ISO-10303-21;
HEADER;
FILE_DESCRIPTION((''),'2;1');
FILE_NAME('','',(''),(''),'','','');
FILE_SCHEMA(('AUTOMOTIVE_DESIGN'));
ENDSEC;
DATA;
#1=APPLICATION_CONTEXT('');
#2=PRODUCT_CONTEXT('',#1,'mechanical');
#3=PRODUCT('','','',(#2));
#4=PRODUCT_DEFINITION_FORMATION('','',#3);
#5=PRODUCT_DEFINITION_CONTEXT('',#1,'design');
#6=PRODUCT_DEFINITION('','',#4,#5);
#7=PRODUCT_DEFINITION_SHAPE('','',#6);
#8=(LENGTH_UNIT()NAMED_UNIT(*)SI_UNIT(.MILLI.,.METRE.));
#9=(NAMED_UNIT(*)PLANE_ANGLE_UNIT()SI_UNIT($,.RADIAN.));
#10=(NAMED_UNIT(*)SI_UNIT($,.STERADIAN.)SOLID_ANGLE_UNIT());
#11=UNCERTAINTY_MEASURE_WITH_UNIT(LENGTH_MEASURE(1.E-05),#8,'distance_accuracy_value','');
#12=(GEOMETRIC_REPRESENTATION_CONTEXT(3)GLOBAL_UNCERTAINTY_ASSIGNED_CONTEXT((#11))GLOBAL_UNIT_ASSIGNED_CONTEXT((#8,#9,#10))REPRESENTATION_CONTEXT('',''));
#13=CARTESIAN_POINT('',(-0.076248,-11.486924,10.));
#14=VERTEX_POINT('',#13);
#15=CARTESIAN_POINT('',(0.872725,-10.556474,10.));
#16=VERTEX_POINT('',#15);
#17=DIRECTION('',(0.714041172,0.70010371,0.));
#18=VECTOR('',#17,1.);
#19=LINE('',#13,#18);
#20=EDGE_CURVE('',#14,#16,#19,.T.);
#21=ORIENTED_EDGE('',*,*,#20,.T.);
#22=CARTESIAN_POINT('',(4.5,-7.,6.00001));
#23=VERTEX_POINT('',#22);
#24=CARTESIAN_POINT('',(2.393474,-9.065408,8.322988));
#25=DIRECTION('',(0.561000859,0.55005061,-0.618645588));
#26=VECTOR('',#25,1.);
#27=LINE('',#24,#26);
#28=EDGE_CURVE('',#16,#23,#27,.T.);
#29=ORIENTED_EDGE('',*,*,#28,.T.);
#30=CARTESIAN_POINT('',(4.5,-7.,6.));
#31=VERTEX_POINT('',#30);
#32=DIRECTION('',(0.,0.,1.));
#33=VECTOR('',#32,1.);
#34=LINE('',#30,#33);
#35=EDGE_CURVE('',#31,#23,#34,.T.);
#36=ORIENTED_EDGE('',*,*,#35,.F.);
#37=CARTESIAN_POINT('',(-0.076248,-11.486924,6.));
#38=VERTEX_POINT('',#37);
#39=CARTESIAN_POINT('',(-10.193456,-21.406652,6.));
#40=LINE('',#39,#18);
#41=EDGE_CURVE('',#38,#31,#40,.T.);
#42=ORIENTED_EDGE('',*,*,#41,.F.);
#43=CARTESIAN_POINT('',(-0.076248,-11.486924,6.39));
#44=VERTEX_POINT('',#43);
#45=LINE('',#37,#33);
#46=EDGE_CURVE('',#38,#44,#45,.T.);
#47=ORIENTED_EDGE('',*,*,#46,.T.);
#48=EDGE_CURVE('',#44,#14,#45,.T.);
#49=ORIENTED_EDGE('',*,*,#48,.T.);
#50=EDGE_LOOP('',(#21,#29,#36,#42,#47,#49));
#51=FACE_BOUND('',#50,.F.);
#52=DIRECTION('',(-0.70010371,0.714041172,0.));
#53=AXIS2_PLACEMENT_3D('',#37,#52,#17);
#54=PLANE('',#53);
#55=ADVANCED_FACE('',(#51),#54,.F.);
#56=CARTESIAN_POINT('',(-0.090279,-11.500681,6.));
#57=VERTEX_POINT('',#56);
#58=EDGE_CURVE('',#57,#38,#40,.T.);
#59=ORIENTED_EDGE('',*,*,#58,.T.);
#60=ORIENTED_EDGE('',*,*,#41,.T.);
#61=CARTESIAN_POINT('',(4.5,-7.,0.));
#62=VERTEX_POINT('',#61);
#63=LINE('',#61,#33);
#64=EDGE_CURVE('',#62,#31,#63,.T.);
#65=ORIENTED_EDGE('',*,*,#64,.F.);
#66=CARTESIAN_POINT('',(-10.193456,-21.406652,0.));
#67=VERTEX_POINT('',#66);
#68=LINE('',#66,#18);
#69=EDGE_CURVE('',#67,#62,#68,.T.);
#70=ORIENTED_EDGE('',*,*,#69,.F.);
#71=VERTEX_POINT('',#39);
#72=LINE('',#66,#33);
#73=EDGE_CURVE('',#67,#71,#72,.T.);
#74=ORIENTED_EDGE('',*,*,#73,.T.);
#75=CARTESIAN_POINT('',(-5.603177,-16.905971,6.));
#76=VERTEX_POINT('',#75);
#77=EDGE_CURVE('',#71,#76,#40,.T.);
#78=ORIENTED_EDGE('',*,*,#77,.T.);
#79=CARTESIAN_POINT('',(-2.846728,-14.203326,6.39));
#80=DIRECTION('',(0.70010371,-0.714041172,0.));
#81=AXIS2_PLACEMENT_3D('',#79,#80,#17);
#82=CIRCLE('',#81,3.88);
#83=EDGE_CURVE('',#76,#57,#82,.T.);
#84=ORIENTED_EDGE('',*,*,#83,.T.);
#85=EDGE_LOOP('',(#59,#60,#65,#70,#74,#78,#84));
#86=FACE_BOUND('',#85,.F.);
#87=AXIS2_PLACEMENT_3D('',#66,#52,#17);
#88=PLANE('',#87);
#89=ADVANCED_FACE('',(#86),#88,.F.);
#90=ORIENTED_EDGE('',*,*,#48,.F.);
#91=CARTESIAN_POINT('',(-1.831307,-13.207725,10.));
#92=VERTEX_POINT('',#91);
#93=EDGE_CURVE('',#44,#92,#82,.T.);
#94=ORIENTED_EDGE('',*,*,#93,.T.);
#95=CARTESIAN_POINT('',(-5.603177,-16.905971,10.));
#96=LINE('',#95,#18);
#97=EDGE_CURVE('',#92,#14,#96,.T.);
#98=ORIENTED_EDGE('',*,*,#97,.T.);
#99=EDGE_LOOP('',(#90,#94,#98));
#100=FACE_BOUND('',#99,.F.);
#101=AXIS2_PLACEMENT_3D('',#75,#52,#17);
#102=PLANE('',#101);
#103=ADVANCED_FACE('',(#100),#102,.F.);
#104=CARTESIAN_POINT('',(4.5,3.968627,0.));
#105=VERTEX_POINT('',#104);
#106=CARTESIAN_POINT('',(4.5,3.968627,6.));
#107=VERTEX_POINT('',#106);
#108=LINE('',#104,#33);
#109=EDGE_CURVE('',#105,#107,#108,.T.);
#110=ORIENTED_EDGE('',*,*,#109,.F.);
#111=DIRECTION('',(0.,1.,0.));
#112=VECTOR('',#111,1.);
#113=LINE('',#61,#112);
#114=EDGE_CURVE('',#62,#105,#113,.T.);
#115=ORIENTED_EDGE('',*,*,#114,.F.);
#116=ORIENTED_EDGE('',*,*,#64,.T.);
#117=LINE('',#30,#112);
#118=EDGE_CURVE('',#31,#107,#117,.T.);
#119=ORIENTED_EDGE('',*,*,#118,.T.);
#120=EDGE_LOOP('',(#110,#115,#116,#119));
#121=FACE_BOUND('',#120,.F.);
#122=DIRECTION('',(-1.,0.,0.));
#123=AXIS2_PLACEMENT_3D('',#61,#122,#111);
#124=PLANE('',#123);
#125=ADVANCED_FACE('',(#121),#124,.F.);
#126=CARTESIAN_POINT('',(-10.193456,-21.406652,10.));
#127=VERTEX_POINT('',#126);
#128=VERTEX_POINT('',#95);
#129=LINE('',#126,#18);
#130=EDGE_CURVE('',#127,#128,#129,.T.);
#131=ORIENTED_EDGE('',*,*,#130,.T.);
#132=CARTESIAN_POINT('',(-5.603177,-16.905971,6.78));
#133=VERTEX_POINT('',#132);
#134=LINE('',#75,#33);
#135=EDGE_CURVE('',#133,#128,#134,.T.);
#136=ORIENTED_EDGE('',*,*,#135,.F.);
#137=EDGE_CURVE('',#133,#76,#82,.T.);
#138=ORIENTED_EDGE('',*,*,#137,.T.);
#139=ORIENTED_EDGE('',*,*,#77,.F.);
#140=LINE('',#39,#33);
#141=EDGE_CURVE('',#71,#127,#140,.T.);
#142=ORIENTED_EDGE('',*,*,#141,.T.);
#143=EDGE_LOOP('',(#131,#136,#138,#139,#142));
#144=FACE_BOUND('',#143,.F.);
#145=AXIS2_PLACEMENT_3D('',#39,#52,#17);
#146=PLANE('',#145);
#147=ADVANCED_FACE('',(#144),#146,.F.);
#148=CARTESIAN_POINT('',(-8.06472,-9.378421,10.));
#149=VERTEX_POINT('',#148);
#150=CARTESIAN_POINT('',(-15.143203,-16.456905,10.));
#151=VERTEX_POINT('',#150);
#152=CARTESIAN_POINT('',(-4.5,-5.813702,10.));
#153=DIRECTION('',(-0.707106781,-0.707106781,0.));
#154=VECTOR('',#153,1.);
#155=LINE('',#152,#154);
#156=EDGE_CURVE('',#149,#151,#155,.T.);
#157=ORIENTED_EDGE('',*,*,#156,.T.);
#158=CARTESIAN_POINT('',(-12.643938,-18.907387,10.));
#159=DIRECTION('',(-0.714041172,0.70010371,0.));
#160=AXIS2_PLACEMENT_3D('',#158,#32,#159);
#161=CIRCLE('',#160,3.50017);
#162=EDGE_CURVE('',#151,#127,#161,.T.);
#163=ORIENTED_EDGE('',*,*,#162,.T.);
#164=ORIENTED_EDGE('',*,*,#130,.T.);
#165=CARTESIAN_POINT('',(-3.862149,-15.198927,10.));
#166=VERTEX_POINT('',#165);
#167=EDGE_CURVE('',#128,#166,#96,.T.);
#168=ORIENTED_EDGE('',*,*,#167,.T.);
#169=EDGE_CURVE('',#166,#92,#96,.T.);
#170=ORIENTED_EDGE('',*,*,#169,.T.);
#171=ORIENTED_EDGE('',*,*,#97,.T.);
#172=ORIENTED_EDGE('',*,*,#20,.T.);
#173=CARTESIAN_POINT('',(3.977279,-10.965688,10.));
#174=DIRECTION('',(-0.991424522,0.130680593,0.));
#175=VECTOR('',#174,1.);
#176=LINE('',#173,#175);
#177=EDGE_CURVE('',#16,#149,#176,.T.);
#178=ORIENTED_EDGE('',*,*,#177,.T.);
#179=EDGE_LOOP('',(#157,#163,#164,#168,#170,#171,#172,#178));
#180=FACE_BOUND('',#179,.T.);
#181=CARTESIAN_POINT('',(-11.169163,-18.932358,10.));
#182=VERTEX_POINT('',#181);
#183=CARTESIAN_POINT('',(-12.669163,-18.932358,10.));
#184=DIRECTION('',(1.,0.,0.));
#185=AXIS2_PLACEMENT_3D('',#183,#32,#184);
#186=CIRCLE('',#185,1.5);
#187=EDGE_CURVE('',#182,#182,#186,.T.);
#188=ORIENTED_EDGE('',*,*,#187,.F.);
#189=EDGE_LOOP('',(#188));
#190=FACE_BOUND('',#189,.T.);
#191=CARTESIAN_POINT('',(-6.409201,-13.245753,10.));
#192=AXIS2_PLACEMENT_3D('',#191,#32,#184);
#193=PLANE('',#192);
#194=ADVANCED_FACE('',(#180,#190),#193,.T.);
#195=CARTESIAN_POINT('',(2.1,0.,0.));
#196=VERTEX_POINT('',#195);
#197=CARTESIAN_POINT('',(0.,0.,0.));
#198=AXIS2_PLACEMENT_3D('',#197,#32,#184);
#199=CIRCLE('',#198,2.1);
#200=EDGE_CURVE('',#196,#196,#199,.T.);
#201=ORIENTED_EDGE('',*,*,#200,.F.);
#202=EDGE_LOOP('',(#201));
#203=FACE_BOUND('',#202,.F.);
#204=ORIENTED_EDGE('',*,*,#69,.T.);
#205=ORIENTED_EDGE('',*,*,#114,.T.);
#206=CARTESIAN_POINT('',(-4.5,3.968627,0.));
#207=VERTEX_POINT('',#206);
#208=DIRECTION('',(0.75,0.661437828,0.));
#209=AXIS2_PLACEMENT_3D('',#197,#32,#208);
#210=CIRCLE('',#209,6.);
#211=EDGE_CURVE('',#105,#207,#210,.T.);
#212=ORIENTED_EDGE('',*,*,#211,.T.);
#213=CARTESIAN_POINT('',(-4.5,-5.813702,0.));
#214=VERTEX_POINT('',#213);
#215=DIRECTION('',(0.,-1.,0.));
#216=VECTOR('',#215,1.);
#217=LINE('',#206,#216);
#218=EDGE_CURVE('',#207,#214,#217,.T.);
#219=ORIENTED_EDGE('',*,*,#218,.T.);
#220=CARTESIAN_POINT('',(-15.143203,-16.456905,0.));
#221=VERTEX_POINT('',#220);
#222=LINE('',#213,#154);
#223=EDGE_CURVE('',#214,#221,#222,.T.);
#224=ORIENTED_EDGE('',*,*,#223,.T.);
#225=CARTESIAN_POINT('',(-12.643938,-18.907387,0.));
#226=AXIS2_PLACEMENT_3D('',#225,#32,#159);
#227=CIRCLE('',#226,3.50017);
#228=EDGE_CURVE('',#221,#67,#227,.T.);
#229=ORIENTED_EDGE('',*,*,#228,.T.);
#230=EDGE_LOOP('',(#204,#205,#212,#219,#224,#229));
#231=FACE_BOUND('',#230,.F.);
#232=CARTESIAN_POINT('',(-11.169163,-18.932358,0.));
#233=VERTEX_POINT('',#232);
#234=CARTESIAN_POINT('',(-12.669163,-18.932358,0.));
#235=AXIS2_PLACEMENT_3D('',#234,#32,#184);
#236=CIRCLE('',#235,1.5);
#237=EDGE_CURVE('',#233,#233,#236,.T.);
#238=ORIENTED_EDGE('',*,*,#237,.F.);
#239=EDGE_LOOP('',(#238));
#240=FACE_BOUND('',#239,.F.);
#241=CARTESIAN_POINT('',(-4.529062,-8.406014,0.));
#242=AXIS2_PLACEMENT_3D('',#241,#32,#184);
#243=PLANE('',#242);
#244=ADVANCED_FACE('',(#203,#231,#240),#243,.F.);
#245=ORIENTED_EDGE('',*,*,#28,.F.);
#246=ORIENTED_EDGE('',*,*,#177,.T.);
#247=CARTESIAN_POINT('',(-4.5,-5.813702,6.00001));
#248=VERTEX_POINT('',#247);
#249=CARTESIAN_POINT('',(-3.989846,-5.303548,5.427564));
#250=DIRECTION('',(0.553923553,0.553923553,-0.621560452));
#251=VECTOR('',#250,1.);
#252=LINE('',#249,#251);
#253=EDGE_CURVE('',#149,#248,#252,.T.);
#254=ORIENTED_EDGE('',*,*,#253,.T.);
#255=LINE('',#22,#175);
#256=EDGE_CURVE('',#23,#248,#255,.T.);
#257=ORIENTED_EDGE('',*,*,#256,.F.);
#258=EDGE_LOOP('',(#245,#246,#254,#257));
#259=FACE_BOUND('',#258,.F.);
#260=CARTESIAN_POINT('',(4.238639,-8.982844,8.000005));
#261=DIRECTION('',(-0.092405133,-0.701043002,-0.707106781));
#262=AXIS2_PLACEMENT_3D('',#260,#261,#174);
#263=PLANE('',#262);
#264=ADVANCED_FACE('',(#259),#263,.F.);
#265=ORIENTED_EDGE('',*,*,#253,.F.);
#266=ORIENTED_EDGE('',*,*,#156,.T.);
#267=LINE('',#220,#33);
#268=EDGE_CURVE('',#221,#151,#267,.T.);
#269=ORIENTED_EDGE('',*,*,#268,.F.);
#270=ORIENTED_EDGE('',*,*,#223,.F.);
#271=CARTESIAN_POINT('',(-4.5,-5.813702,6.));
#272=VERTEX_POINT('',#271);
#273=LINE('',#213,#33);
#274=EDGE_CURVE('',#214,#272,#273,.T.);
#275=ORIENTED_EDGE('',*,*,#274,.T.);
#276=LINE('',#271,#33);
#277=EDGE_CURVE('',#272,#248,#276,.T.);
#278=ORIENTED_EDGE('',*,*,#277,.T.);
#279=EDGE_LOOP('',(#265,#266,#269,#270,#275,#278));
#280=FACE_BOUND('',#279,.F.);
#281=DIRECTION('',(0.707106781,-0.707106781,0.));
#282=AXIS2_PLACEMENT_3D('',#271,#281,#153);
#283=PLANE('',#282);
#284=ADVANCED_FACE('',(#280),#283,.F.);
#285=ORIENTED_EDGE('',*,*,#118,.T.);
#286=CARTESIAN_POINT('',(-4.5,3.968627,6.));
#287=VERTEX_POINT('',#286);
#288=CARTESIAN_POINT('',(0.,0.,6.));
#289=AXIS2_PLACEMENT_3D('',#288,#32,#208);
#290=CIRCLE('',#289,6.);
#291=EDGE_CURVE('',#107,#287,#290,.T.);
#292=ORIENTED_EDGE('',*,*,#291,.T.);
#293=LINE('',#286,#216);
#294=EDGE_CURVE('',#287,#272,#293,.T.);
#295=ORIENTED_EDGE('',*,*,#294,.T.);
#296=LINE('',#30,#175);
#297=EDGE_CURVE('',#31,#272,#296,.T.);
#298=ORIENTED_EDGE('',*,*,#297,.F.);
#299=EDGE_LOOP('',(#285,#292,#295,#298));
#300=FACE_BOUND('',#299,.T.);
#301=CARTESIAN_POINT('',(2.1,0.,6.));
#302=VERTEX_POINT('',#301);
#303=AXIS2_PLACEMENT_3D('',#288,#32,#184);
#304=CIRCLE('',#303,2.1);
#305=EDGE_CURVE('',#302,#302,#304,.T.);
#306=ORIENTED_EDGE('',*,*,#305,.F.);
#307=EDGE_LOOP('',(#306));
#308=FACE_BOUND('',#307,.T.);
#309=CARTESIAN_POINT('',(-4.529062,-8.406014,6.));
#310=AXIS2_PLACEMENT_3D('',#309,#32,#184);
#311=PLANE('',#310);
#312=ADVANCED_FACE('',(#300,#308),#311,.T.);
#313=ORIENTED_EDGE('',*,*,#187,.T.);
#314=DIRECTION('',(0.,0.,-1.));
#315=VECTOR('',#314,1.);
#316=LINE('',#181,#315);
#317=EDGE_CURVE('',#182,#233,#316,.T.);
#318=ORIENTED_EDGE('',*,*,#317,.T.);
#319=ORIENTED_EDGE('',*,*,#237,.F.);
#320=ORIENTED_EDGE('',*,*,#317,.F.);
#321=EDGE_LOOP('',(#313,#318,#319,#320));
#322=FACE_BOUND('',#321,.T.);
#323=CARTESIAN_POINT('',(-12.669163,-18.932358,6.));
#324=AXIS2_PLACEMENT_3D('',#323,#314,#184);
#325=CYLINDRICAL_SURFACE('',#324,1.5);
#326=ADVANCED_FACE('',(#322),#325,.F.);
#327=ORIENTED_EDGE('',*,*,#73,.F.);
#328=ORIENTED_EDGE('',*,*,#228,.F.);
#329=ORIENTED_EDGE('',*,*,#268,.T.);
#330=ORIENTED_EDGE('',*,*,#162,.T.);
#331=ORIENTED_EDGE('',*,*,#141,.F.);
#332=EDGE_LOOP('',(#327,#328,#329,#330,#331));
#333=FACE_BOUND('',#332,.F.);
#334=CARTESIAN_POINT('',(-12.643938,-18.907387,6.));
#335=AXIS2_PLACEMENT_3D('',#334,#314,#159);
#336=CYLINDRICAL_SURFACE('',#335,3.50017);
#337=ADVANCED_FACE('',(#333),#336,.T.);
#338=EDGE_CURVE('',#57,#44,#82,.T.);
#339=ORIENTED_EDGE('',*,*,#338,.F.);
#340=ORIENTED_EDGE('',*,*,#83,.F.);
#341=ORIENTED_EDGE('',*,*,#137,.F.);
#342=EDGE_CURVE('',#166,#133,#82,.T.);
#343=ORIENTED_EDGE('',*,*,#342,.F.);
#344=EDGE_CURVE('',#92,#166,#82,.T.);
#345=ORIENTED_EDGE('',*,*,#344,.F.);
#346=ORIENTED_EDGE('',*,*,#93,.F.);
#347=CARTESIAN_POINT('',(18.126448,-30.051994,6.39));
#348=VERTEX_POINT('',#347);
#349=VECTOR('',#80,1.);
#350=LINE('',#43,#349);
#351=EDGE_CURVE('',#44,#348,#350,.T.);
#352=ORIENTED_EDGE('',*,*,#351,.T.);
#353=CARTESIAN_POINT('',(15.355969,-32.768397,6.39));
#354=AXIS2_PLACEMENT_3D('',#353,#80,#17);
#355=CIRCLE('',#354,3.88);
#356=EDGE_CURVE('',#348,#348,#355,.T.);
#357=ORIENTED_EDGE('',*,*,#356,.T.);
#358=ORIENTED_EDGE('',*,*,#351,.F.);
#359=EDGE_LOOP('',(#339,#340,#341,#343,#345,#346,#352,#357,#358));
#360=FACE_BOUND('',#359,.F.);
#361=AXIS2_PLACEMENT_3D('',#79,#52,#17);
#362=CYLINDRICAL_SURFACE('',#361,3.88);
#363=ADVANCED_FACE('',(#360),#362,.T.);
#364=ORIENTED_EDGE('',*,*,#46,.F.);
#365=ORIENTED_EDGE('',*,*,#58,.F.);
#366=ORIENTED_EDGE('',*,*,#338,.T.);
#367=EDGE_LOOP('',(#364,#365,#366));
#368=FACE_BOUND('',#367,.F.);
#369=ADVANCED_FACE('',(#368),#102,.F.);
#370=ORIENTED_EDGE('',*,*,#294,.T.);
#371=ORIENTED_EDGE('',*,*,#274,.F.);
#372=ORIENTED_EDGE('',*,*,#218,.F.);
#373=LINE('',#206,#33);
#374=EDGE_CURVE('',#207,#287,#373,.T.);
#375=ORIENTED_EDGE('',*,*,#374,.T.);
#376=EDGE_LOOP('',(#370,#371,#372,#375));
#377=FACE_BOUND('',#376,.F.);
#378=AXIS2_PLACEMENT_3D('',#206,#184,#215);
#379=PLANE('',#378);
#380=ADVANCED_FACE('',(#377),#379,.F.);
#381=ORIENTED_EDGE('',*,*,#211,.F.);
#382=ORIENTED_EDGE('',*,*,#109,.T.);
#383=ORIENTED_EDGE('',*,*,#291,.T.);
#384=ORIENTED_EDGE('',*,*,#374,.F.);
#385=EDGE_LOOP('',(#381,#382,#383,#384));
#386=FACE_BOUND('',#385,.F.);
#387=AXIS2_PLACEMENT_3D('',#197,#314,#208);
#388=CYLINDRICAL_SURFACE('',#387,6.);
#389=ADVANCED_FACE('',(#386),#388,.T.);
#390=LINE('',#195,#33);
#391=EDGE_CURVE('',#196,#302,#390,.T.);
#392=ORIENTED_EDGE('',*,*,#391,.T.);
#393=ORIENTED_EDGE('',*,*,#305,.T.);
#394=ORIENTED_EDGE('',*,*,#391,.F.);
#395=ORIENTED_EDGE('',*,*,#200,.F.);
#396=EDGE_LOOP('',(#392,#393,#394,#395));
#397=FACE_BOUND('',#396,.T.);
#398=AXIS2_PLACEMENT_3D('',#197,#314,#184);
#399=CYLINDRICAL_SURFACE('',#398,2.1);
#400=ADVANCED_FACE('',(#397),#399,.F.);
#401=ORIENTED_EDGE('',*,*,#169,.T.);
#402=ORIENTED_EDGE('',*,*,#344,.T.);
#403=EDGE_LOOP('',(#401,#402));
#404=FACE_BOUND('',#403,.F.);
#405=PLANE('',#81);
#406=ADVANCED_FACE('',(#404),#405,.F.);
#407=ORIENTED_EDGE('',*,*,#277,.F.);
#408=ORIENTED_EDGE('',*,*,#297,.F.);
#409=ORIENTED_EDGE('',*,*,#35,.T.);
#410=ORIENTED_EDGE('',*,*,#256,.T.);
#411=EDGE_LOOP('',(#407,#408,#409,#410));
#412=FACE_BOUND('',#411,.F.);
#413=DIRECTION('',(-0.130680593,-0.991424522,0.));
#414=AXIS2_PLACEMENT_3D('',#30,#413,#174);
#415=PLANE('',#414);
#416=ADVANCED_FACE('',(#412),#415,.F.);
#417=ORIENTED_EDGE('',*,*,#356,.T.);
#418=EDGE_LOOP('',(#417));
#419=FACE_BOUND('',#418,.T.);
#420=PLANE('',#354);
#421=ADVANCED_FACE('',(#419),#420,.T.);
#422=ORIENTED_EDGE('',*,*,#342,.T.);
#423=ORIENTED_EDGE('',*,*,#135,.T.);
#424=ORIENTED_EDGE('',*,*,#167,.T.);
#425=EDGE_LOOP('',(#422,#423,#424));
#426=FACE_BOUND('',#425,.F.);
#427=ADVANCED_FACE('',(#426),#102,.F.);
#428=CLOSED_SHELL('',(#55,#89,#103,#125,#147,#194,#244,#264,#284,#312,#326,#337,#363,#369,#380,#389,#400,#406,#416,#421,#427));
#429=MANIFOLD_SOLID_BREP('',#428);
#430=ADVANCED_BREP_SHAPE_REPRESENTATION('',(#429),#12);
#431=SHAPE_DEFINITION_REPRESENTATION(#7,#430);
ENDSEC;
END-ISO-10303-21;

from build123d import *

# Parameters (mm, degrees)
F0_R     = 1.5
F0_R_2   = 2.1
F1_DEPTH = 6
F2_R     = 3.88
F3_DEPTH = 26
F4_R     = 1.5
F5_DEPTH = 4
F6_SIZE  = 3.99999


# Not quite as in the source:
# - a fillet or chamfer is up to 0.001 mm smaller than in the source, because OpenCascade refuses the exact size


with BuildPart() as f1:
    # F0 (on Top) → F1 (new body)
    with BuildSketch(Plane.XY):
        with BuildLine():
            Line((4.5, 0), (4.5, 3.9686269666))
            ThreePointArc((4.5, 3.9686269666), (0, 6), (-4.5, 3.9686269666))
            Line((-4.5, 3.9686269666), (-4.5, 0))
            Line((-4.5, 0), (-4.5, -5.813701588))
            Line((-4.5, -5.813701588), (-15.143203234, -16.4569048219))
            ThreePointArc((-15.143203234, -16.4569048219), (-15.1189316865, -21.3823807428), (-10.1934557657, -21.4066522902))
            Line((-10.1934557657, -21.4066522902), (4.5, -7))
            Line((4.5, -7), (4.5, 0))
        make_face()
        with Locations((-12.6691633098, -18.9323580438)):
            Circle(F0_R, mode=Mode.SUBTRACT)
        Circle(F0_R_2, mode=Mode.SUBTRACT)
    extrude(amount=F1_DEPTH)

    # F2 (on face) → F3 (join)
    with BuildSketch(Plane(origin=(5.7049735344, -5.8185465008, 0), x_dir=(0.7140411723, 0.7001037097, 0), z_dir=(0.7001037097, -0.7140411723, 0))):
        with Locations((-11.9764822387, 6.39)):
            Circle(F2_R)
    extrude(amount=F3_DEPTH)

    # F4 (on face) → F5 (join)
    with BuildSketch(Plane.XY.offset(6)):
        with BuildLine():
            Line((-4.5, -5.813701588), (-15.143203234, -16.4569048219))
            ThreePointArc((-15.143203234, -16.4569048219), (-15.1189316865, -21.3823807428), (-10.1934557657, -21.4066522902))
            Line((-10.1934557657, -21.4066522902), (-5.6031765259, -16.9059713084))
            Line((-5.6031765259, -16.9059713084), (-0.0762481345, -11.4869237515))
            Line((-0.0762481345, -11.4869237515), (4.5, -7))
            Line((4.5, -7), (-4.5, -5.813701588))
        make_face()
        with Locations((-12.6691633098, -18.9323580438)):
            Circle(F4_R, mode=Mode.SUBTRACT)
    extrude(amount=F5_DEPTH)

    # F6 (size 4 in the source; OpenCascade refuses exactly that, so slightly less here)
    f6_edges = [f1.edges().sort_by_distance(p)[0] for p in [
        (0, -6.406851, 10),
    ]]
    chamfer(f6_edges, length=F6_SIZE)


solid = f1.part
